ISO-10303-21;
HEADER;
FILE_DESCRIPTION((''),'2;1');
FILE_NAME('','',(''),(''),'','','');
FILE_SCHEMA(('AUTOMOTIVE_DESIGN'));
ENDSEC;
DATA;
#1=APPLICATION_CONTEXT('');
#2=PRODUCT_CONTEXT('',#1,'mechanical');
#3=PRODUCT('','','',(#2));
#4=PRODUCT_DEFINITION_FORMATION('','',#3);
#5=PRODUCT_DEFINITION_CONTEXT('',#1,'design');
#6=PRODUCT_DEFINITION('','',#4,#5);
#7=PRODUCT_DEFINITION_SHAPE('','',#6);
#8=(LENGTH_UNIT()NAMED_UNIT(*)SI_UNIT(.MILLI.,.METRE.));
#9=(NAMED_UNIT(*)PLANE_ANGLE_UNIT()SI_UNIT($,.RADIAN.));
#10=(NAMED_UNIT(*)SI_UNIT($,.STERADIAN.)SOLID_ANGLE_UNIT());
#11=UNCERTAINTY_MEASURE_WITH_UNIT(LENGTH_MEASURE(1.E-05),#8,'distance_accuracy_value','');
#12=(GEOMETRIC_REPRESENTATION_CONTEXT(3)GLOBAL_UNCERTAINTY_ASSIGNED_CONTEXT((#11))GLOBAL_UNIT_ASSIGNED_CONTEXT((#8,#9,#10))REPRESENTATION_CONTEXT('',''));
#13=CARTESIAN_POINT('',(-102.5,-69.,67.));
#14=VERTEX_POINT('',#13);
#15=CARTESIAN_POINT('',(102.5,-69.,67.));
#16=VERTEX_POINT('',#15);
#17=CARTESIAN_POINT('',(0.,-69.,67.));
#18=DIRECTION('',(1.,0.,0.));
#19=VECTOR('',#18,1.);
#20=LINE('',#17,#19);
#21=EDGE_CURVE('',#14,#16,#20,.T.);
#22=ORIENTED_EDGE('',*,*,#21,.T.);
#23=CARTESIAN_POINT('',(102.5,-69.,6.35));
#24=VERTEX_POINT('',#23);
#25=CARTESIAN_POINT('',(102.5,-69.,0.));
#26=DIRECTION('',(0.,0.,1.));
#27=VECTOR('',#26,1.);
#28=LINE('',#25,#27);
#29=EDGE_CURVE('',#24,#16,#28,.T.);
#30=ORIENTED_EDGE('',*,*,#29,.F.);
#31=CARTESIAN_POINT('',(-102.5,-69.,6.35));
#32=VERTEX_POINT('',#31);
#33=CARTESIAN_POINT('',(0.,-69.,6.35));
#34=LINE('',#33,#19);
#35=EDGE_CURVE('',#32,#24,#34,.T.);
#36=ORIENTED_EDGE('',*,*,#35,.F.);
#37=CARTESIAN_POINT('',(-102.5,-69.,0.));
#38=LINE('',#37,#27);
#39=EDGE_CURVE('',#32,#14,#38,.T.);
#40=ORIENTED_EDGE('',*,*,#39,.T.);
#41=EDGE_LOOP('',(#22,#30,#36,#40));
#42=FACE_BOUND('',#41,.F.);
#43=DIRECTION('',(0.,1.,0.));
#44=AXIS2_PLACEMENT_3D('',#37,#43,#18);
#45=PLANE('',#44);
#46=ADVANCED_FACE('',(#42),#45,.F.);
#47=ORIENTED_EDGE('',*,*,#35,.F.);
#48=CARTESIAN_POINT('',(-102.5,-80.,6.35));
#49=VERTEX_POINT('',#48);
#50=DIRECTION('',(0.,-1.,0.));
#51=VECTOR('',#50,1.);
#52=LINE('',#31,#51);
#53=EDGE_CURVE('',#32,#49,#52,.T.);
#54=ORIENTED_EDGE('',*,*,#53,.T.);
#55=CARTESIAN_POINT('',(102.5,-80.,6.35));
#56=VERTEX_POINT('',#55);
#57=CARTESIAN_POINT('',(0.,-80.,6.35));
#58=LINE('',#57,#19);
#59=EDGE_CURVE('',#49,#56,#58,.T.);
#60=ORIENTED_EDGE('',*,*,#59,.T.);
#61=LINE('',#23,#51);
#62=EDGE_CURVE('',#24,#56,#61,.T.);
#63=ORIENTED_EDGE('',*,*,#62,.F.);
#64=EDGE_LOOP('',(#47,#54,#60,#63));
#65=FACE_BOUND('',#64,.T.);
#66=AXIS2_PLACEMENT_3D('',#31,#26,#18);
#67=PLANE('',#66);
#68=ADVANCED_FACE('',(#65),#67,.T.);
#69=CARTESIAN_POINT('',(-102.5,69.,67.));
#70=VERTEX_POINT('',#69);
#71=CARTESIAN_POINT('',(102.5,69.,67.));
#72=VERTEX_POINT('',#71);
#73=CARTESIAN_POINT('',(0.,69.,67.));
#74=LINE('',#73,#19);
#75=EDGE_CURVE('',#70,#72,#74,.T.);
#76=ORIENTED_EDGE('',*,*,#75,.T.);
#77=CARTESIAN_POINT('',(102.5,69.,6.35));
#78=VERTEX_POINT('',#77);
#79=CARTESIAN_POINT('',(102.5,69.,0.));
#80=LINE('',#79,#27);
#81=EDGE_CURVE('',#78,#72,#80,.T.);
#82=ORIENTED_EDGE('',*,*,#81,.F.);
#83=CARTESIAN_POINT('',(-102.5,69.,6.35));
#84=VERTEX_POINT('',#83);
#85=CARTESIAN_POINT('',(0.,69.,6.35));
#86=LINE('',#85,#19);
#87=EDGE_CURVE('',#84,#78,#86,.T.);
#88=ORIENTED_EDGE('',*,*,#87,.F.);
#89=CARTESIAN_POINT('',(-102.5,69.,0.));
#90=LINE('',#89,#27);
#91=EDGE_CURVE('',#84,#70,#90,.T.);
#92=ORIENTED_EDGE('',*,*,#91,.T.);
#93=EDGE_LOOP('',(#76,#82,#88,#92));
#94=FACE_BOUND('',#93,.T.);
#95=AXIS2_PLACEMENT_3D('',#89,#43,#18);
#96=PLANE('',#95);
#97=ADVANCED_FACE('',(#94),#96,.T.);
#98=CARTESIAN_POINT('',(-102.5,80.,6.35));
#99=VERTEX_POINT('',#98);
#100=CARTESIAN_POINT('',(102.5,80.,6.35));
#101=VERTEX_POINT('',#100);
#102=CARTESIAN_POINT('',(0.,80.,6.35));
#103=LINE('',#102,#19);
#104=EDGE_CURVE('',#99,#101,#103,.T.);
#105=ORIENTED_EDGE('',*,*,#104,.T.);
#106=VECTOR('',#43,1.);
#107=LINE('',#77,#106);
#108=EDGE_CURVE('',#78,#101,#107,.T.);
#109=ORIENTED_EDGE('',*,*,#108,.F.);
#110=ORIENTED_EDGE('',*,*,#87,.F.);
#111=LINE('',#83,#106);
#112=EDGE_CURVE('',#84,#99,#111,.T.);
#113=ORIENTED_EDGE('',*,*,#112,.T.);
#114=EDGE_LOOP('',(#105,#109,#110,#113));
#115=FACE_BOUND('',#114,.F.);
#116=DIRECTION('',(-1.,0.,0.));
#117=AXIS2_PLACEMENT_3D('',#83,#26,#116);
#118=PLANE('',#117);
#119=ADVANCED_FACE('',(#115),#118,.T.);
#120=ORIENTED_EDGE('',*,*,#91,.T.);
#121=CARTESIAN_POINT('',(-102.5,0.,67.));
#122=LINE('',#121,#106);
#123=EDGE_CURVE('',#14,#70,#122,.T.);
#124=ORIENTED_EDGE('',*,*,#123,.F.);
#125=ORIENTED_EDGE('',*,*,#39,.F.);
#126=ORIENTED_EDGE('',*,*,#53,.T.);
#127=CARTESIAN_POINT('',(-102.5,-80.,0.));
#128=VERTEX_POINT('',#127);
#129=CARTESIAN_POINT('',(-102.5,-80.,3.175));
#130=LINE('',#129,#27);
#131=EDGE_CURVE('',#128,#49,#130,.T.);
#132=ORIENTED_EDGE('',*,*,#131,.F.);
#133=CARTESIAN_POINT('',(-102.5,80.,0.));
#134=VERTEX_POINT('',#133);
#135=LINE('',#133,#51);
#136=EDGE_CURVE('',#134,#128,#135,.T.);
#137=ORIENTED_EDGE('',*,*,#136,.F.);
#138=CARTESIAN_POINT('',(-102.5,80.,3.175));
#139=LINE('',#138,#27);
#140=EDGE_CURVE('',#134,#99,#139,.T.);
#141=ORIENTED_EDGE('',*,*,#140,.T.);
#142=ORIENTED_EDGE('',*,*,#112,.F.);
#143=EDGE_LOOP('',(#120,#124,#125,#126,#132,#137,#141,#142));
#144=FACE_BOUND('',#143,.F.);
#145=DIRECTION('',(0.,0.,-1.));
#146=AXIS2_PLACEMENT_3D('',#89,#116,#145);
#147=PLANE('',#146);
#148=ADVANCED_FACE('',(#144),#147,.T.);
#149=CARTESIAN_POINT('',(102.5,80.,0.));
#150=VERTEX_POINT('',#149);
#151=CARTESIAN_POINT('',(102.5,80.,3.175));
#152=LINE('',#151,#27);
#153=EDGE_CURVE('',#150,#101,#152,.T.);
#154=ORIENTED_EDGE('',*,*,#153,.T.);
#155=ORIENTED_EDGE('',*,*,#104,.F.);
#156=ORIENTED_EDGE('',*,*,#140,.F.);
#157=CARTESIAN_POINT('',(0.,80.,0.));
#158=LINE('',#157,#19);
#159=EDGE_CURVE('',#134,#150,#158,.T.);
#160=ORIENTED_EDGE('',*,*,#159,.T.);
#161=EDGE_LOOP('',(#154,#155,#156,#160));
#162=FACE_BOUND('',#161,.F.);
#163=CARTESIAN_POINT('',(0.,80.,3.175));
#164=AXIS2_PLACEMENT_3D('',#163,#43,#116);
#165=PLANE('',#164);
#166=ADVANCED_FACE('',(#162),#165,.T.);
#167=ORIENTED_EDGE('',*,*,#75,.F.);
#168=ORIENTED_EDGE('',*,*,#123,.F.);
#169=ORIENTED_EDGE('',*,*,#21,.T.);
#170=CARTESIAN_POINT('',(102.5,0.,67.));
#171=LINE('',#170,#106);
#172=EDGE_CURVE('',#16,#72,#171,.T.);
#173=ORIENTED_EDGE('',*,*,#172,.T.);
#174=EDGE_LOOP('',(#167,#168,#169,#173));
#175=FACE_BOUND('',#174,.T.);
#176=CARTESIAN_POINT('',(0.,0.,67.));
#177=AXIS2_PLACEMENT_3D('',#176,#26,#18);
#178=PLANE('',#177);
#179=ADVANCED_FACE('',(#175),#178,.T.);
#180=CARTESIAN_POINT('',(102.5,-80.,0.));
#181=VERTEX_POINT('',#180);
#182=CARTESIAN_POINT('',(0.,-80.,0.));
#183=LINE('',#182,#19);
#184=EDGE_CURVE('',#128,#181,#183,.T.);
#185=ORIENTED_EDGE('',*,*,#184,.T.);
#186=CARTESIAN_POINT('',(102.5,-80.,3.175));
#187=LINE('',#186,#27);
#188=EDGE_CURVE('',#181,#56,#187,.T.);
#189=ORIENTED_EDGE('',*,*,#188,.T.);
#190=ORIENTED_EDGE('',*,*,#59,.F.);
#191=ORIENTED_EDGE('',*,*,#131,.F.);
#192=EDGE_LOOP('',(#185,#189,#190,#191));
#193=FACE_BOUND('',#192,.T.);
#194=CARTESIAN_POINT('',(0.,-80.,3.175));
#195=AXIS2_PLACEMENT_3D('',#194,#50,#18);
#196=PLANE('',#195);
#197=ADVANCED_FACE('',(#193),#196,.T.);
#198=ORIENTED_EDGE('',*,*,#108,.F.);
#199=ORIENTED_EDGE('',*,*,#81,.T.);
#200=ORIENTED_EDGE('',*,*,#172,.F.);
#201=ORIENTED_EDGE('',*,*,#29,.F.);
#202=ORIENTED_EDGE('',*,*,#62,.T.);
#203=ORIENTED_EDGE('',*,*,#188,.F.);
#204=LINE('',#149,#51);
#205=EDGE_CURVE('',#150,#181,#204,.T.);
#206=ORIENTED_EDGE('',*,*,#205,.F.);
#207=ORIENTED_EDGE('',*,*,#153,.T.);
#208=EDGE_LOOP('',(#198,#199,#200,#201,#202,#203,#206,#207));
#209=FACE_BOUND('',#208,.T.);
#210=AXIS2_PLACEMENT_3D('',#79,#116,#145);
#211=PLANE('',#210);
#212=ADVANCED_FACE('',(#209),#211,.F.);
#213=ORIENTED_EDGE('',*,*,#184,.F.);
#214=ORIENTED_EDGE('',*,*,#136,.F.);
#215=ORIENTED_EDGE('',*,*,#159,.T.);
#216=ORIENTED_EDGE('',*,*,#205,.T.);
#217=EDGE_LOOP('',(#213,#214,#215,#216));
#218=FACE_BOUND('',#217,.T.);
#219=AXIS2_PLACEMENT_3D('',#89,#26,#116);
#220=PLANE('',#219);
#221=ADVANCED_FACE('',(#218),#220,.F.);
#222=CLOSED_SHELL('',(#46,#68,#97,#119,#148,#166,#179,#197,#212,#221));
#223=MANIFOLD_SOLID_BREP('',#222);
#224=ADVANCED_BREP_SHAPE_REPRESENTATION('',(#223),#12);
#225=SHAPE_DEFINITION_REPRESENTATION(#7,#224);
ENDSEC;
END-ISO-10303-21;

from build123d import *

# Parameters (mm, degrees)
F0_W     = 205
F0_H     = 138
F1_DEPTH = 67
F2_W     = 205
F2_H     = 6.35
F3_DEPTH = 11


# Not quite as in the source:
# - a pattern or mirror of a feature is missing from the dataset's text; its kind, count and spacing are read off the source's solid


with BuildPart() as f1:
    # F0 (on Top) → F1 (new body)
    with BuildSketch(Plane.XY):
        Rectangle(F0_W, F0_H)
    extrude(amount=F1_DEPTH)

    # F2 (on face) → F3 (join)
    with BuildSketch(Plane.XZ.offset(69)):
        with Locations((0, 3.175)):
            Rectangle(F2_W, F2_H)
    f3 = extrude(amount=F3_DEPTH)

    # F3_copies: F3 across plane
    add(f3.mirror(Plane.ZX))


solid = f1.part
